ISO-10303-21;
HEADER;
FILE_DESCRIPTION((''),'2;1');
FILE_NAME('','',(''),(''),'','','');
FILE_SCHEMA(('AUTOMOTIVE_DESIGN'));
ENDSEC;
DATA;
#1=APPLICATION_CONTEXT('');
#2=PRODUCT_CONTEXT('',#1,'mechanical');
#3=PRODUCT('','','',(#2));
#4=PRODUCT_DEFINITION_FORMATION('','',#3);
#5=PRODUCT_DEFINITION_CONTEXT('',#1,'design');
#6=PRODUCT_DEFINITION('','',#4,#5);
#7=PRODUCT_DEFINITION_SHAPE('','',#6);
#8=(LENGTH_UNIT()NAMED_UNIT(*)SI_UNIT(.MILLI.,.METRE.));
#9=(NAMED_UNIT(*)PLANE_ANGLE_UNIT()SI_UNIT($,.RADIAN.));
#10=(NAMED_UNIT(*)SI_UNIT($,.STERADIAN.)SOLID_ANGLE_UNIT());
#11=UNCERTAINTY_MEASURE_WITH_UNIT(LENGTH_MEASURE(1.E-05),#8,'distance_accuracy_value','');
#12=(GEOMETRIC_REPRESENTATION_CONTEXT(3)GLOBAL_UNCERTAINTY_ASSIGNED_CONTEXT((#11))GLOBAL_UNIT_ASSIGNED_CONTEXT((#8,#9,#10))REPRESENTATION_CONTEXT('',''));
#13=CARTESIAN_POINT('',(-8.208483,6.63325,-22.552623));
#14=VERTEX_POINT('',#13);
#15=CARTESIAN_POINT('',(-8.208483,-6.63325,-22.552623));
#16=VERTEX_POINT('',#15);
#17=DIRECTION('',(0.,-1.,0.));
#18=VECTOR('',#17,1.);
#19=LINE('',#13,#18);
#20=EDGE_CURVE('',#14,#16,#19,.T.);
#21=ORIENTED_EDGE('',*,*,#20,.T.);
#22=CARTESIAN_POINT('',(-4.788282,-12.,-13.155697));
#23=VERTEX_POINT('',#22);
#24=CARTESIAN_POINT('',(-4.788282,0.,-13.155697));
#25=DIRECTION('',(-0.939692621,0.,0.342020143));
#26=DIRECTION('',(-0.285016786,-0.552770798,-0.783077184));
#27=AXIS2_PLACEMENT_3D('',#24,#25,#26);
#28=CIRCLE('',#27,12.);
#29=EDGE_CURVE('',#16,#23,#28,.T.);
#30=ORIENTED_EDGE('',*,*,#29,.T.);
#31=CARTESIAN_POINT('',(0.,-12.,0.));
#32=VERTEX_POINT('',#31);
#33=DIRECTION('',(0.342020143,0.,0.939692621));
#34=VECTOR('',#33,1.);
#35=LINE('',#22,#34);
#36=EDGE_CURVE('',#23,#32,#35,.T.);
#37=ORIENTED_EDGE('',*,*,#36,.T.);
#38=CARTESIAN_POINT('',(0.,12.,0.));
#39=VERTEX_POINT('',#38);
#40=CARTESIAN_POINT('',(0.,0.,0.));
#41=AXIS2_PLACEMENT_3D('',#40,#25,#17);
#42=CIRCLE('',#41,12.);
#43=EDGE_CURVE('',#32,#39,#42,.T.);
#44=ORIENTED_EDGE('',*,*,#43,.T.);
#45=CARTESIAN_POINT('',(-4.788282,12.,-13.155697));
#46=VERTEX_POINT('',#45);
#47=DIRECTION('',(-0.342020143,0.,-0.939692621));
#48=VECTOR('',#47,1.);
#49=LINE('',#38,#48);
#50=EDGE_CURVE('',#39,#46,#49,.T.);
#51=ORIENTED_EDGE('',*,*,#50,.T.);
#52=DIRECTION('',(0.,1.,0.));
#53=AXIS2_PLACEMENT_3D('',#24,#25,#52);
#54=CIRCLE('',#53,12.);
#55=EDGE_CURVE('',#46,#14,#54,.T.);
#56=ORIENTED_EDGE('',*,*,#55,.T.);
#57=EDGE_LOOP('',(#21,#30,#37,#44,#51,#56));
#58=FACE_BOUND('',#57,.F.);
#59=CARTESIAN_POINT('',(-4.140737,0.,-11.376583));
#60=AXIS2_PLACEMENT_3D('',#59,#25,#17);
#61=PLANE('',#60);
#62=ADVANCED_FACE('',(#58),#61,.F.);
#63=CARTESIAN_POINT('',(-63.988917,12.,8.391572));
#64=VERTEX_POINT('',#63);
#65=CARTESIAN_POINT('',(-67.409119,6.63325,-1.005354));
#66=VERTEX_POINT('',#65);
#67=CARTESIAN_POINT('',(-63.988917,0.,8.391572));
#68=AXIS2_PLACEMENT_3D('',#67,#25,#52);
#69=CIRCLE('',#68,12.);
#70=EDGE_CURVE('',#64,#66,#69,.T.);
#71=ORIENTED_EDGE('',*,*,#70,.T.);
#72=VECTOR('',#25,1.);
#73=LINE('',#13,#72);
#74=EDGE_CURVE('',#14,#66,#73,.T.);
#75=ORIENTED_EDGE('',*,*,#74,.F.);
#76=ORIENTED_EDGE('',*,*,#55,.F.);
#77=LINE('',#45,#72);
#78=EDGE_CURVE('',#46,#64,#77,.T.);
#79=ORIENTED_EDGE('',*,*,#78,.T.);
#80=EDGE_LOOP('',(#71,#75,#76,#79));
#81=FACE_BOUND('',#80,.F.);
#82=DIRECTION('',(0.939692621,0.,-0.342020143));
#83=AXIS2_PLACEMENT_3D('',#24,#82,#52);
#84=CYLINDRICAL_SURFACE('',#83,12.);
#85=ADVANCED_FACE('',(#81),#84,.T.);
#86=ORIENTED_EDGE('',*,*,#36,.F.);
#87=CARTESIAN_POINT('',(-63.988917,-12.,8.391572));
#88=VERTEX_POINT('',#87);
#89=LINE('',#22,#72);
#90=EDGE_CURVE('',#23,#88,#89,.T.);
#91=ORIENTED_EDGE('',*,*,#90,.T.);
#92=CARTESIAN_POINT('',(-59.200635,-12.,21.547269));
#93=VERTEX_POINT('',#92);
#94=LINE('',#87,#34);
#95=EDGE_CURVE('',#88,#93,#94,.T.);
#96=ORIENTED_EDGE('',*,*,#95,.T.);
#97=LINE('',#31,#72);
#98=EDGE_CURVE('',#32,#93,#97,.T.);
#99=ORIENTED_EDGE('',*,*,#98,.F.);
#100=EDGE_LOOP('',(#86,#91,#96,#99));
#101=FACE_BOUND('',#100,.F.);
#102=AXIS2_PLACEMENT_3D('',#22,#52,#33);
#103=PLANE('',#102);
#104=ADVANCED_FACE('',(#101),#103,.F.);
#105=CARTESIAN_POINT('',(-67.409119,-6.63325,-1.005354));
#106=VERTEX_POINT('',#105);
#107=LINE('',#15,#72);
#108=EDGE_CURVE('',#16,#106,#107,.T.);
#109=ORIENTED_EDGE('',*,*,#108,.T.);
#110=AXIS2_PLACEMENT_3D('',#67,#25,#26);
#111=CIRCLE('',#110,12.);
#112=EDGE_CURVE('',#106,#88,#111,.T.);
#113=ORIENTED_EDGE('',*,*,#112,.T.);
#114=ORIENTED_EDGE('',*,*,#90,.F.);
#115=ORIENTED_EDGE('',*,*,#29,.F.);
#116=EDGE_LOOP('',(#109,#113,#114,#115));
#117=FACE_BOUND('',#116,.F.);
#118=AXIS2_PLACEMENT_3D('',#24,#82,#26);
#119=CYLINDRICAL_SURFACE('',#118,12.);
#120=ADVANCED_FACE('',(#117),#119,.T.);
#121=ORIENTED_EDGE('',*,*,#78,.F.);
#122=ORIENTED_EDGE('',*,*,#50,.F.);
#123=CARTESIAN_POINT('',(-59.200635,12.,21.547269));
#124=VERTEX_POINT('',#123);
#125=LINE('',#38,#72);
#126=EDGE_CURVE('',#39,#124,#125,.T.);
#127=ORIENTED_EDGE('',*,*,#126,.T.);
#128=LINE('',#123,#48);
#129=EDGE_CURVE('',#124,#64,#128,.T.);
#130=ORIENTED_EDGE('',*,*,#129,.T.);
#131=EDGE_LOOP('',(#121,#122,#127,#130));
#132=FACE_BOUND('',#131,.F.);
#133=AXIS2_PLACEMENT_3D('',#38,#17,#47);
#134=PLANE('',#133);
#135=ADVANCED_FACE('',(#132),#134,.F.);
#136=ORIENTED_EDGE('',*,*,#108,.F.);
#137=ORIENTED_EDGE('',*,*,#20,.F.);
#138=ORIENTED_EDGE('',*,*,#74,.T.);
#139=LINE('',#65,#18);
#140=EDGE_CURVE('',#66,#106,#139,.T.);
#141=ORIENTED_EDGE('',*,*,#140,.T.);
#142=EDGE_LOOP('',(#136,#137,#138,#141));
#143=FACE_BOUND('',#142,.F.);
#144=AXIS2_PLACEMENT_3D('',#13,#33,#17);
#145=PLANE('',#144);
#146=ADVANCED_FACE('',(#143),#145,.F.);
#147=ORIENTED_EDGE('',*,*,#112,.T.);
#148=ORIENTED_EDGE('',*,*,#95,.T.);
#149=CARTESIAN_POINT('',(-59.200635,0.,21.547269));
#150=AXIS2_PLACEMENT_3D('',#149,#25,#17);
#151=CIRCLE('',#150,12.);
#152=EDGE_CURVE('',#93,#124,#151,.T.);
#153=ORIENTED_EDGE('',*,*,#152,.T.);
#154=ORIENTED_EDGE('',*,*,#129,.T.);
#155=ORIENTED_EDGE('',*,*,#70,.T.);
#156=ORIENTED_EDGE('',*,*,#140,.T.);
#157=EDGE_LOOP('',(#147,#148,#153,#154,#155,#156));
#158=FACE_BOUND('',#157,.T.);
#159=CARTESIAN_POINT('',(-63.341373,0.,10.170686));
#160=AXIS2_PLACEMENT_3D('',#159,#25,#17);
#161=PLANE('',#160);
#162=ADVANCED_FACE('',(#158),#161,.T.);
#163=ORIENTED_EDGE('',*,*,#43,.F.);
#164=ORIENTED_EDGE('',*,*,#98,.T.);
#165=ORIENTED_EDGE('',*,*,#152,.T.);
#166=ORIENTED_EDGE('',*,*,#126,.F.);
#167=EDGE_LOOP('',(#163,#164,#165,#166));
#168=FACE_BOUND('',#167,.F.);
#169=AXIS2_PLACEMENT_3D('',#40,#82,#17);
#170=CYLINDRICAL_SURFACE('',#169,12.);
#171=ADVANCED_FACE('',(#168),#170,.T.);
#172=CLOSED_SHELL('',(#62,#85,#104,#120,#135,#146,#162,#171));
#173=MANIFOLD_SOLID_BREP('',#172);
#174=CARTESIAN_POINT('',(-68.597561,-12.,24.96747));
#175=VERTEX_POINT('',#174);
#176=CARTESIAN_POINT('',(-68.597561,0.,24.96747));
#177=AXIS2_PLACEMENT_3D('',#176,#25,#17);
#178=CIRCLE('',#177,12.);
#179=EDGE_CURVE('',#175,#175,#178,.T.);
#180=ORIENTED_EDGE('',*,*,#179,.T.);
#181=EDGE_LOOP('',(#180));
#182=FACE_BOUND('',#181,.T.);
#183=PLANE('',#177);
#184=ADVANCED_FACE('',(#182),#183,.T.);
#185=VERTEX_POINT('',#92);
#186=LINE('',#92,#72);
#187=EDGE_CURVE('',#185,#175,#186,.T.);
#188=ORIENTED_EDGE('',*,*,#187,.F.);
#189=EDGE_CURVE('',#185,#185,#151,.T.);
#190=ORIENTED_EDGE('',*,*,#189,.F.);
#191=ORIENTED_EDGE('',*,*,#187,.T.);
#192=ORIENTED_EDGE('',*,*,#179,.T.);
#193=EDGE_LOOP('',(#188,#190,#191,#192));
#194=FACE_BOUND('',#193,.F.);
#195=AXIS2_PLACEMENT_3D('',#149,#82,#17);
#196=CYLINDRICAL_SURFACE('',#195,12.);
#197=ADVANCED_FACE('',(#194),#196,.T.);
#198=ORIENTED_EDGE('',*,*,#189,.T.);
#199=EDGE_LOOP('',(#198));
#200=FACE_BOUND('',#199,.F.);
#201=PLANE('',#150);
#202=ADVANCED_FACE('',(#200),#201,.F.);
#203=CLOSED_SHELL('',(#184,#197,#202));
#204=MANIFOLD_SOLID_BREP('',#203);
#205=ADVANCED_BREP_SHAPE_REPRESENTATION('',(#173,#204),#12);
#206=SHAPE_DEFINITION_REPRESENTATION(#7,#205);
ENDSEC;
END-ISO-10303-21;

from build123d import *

# Parameters (mm, degrees)
F4_START = 63
F4_DEPTH = 10
F5_DEPTH = 63


# Not quite as in the source:
# - the program builds the solid bodies; features that only make, move or delete a surface that nothing else refers to are left out


with BuildPart() as f4:
    # F3 (on line) → F4 (new body)
    with BuildSketch(Plane(origin=(0, 0, 0), x_dir=(0, -1, 0), z_dir=(-0.9396926208, 0, 0.3420201433)).offset(F4_START)):
        with BuildLine():
            ThreePointArc((-12, 0), (0, -12), (12, 0))
            ThreePointArc((12, 0), (0, 12), (-12, 0))
        make_face()
    extrude(amount=F4_DEPTH)


with BuildPart() as f5:
    # F3 (on line) → F5 (new body)
    with BuildSketch(Plane(origin=(0, 0, 0), x_dir=(0, -1, 0), z_dir=(-0.9396926208, 0, 0.3420201433))):
        with BuildLine():
            Line((12, -14), (12, 0))
            ThreePointArc((12, 0), (0, -12), (-12, 0))
            Line((-12, 0), (-12, -14))
            ThreePointArc((-12, -14), (-10.5735281474, -19.6745486619), (-6.6332495807, -24))
            Line((-6.6332495807, -24), (6.6332495807, -24))
            ThreePointArc((6.6332495807, -24), (10.5735281474, -19.6745486619), (12, -14))
        make_face()
        with BuildLine():
            ThreePointArc((-12, 0), (0, -12), (12, 0))
            ThreePointArc((12, 0), (0, 12), (-12, 0))
        make_face()
    extrude(amount=F5_DEPTH)


solid = Compound([f4.part, f5.part])
